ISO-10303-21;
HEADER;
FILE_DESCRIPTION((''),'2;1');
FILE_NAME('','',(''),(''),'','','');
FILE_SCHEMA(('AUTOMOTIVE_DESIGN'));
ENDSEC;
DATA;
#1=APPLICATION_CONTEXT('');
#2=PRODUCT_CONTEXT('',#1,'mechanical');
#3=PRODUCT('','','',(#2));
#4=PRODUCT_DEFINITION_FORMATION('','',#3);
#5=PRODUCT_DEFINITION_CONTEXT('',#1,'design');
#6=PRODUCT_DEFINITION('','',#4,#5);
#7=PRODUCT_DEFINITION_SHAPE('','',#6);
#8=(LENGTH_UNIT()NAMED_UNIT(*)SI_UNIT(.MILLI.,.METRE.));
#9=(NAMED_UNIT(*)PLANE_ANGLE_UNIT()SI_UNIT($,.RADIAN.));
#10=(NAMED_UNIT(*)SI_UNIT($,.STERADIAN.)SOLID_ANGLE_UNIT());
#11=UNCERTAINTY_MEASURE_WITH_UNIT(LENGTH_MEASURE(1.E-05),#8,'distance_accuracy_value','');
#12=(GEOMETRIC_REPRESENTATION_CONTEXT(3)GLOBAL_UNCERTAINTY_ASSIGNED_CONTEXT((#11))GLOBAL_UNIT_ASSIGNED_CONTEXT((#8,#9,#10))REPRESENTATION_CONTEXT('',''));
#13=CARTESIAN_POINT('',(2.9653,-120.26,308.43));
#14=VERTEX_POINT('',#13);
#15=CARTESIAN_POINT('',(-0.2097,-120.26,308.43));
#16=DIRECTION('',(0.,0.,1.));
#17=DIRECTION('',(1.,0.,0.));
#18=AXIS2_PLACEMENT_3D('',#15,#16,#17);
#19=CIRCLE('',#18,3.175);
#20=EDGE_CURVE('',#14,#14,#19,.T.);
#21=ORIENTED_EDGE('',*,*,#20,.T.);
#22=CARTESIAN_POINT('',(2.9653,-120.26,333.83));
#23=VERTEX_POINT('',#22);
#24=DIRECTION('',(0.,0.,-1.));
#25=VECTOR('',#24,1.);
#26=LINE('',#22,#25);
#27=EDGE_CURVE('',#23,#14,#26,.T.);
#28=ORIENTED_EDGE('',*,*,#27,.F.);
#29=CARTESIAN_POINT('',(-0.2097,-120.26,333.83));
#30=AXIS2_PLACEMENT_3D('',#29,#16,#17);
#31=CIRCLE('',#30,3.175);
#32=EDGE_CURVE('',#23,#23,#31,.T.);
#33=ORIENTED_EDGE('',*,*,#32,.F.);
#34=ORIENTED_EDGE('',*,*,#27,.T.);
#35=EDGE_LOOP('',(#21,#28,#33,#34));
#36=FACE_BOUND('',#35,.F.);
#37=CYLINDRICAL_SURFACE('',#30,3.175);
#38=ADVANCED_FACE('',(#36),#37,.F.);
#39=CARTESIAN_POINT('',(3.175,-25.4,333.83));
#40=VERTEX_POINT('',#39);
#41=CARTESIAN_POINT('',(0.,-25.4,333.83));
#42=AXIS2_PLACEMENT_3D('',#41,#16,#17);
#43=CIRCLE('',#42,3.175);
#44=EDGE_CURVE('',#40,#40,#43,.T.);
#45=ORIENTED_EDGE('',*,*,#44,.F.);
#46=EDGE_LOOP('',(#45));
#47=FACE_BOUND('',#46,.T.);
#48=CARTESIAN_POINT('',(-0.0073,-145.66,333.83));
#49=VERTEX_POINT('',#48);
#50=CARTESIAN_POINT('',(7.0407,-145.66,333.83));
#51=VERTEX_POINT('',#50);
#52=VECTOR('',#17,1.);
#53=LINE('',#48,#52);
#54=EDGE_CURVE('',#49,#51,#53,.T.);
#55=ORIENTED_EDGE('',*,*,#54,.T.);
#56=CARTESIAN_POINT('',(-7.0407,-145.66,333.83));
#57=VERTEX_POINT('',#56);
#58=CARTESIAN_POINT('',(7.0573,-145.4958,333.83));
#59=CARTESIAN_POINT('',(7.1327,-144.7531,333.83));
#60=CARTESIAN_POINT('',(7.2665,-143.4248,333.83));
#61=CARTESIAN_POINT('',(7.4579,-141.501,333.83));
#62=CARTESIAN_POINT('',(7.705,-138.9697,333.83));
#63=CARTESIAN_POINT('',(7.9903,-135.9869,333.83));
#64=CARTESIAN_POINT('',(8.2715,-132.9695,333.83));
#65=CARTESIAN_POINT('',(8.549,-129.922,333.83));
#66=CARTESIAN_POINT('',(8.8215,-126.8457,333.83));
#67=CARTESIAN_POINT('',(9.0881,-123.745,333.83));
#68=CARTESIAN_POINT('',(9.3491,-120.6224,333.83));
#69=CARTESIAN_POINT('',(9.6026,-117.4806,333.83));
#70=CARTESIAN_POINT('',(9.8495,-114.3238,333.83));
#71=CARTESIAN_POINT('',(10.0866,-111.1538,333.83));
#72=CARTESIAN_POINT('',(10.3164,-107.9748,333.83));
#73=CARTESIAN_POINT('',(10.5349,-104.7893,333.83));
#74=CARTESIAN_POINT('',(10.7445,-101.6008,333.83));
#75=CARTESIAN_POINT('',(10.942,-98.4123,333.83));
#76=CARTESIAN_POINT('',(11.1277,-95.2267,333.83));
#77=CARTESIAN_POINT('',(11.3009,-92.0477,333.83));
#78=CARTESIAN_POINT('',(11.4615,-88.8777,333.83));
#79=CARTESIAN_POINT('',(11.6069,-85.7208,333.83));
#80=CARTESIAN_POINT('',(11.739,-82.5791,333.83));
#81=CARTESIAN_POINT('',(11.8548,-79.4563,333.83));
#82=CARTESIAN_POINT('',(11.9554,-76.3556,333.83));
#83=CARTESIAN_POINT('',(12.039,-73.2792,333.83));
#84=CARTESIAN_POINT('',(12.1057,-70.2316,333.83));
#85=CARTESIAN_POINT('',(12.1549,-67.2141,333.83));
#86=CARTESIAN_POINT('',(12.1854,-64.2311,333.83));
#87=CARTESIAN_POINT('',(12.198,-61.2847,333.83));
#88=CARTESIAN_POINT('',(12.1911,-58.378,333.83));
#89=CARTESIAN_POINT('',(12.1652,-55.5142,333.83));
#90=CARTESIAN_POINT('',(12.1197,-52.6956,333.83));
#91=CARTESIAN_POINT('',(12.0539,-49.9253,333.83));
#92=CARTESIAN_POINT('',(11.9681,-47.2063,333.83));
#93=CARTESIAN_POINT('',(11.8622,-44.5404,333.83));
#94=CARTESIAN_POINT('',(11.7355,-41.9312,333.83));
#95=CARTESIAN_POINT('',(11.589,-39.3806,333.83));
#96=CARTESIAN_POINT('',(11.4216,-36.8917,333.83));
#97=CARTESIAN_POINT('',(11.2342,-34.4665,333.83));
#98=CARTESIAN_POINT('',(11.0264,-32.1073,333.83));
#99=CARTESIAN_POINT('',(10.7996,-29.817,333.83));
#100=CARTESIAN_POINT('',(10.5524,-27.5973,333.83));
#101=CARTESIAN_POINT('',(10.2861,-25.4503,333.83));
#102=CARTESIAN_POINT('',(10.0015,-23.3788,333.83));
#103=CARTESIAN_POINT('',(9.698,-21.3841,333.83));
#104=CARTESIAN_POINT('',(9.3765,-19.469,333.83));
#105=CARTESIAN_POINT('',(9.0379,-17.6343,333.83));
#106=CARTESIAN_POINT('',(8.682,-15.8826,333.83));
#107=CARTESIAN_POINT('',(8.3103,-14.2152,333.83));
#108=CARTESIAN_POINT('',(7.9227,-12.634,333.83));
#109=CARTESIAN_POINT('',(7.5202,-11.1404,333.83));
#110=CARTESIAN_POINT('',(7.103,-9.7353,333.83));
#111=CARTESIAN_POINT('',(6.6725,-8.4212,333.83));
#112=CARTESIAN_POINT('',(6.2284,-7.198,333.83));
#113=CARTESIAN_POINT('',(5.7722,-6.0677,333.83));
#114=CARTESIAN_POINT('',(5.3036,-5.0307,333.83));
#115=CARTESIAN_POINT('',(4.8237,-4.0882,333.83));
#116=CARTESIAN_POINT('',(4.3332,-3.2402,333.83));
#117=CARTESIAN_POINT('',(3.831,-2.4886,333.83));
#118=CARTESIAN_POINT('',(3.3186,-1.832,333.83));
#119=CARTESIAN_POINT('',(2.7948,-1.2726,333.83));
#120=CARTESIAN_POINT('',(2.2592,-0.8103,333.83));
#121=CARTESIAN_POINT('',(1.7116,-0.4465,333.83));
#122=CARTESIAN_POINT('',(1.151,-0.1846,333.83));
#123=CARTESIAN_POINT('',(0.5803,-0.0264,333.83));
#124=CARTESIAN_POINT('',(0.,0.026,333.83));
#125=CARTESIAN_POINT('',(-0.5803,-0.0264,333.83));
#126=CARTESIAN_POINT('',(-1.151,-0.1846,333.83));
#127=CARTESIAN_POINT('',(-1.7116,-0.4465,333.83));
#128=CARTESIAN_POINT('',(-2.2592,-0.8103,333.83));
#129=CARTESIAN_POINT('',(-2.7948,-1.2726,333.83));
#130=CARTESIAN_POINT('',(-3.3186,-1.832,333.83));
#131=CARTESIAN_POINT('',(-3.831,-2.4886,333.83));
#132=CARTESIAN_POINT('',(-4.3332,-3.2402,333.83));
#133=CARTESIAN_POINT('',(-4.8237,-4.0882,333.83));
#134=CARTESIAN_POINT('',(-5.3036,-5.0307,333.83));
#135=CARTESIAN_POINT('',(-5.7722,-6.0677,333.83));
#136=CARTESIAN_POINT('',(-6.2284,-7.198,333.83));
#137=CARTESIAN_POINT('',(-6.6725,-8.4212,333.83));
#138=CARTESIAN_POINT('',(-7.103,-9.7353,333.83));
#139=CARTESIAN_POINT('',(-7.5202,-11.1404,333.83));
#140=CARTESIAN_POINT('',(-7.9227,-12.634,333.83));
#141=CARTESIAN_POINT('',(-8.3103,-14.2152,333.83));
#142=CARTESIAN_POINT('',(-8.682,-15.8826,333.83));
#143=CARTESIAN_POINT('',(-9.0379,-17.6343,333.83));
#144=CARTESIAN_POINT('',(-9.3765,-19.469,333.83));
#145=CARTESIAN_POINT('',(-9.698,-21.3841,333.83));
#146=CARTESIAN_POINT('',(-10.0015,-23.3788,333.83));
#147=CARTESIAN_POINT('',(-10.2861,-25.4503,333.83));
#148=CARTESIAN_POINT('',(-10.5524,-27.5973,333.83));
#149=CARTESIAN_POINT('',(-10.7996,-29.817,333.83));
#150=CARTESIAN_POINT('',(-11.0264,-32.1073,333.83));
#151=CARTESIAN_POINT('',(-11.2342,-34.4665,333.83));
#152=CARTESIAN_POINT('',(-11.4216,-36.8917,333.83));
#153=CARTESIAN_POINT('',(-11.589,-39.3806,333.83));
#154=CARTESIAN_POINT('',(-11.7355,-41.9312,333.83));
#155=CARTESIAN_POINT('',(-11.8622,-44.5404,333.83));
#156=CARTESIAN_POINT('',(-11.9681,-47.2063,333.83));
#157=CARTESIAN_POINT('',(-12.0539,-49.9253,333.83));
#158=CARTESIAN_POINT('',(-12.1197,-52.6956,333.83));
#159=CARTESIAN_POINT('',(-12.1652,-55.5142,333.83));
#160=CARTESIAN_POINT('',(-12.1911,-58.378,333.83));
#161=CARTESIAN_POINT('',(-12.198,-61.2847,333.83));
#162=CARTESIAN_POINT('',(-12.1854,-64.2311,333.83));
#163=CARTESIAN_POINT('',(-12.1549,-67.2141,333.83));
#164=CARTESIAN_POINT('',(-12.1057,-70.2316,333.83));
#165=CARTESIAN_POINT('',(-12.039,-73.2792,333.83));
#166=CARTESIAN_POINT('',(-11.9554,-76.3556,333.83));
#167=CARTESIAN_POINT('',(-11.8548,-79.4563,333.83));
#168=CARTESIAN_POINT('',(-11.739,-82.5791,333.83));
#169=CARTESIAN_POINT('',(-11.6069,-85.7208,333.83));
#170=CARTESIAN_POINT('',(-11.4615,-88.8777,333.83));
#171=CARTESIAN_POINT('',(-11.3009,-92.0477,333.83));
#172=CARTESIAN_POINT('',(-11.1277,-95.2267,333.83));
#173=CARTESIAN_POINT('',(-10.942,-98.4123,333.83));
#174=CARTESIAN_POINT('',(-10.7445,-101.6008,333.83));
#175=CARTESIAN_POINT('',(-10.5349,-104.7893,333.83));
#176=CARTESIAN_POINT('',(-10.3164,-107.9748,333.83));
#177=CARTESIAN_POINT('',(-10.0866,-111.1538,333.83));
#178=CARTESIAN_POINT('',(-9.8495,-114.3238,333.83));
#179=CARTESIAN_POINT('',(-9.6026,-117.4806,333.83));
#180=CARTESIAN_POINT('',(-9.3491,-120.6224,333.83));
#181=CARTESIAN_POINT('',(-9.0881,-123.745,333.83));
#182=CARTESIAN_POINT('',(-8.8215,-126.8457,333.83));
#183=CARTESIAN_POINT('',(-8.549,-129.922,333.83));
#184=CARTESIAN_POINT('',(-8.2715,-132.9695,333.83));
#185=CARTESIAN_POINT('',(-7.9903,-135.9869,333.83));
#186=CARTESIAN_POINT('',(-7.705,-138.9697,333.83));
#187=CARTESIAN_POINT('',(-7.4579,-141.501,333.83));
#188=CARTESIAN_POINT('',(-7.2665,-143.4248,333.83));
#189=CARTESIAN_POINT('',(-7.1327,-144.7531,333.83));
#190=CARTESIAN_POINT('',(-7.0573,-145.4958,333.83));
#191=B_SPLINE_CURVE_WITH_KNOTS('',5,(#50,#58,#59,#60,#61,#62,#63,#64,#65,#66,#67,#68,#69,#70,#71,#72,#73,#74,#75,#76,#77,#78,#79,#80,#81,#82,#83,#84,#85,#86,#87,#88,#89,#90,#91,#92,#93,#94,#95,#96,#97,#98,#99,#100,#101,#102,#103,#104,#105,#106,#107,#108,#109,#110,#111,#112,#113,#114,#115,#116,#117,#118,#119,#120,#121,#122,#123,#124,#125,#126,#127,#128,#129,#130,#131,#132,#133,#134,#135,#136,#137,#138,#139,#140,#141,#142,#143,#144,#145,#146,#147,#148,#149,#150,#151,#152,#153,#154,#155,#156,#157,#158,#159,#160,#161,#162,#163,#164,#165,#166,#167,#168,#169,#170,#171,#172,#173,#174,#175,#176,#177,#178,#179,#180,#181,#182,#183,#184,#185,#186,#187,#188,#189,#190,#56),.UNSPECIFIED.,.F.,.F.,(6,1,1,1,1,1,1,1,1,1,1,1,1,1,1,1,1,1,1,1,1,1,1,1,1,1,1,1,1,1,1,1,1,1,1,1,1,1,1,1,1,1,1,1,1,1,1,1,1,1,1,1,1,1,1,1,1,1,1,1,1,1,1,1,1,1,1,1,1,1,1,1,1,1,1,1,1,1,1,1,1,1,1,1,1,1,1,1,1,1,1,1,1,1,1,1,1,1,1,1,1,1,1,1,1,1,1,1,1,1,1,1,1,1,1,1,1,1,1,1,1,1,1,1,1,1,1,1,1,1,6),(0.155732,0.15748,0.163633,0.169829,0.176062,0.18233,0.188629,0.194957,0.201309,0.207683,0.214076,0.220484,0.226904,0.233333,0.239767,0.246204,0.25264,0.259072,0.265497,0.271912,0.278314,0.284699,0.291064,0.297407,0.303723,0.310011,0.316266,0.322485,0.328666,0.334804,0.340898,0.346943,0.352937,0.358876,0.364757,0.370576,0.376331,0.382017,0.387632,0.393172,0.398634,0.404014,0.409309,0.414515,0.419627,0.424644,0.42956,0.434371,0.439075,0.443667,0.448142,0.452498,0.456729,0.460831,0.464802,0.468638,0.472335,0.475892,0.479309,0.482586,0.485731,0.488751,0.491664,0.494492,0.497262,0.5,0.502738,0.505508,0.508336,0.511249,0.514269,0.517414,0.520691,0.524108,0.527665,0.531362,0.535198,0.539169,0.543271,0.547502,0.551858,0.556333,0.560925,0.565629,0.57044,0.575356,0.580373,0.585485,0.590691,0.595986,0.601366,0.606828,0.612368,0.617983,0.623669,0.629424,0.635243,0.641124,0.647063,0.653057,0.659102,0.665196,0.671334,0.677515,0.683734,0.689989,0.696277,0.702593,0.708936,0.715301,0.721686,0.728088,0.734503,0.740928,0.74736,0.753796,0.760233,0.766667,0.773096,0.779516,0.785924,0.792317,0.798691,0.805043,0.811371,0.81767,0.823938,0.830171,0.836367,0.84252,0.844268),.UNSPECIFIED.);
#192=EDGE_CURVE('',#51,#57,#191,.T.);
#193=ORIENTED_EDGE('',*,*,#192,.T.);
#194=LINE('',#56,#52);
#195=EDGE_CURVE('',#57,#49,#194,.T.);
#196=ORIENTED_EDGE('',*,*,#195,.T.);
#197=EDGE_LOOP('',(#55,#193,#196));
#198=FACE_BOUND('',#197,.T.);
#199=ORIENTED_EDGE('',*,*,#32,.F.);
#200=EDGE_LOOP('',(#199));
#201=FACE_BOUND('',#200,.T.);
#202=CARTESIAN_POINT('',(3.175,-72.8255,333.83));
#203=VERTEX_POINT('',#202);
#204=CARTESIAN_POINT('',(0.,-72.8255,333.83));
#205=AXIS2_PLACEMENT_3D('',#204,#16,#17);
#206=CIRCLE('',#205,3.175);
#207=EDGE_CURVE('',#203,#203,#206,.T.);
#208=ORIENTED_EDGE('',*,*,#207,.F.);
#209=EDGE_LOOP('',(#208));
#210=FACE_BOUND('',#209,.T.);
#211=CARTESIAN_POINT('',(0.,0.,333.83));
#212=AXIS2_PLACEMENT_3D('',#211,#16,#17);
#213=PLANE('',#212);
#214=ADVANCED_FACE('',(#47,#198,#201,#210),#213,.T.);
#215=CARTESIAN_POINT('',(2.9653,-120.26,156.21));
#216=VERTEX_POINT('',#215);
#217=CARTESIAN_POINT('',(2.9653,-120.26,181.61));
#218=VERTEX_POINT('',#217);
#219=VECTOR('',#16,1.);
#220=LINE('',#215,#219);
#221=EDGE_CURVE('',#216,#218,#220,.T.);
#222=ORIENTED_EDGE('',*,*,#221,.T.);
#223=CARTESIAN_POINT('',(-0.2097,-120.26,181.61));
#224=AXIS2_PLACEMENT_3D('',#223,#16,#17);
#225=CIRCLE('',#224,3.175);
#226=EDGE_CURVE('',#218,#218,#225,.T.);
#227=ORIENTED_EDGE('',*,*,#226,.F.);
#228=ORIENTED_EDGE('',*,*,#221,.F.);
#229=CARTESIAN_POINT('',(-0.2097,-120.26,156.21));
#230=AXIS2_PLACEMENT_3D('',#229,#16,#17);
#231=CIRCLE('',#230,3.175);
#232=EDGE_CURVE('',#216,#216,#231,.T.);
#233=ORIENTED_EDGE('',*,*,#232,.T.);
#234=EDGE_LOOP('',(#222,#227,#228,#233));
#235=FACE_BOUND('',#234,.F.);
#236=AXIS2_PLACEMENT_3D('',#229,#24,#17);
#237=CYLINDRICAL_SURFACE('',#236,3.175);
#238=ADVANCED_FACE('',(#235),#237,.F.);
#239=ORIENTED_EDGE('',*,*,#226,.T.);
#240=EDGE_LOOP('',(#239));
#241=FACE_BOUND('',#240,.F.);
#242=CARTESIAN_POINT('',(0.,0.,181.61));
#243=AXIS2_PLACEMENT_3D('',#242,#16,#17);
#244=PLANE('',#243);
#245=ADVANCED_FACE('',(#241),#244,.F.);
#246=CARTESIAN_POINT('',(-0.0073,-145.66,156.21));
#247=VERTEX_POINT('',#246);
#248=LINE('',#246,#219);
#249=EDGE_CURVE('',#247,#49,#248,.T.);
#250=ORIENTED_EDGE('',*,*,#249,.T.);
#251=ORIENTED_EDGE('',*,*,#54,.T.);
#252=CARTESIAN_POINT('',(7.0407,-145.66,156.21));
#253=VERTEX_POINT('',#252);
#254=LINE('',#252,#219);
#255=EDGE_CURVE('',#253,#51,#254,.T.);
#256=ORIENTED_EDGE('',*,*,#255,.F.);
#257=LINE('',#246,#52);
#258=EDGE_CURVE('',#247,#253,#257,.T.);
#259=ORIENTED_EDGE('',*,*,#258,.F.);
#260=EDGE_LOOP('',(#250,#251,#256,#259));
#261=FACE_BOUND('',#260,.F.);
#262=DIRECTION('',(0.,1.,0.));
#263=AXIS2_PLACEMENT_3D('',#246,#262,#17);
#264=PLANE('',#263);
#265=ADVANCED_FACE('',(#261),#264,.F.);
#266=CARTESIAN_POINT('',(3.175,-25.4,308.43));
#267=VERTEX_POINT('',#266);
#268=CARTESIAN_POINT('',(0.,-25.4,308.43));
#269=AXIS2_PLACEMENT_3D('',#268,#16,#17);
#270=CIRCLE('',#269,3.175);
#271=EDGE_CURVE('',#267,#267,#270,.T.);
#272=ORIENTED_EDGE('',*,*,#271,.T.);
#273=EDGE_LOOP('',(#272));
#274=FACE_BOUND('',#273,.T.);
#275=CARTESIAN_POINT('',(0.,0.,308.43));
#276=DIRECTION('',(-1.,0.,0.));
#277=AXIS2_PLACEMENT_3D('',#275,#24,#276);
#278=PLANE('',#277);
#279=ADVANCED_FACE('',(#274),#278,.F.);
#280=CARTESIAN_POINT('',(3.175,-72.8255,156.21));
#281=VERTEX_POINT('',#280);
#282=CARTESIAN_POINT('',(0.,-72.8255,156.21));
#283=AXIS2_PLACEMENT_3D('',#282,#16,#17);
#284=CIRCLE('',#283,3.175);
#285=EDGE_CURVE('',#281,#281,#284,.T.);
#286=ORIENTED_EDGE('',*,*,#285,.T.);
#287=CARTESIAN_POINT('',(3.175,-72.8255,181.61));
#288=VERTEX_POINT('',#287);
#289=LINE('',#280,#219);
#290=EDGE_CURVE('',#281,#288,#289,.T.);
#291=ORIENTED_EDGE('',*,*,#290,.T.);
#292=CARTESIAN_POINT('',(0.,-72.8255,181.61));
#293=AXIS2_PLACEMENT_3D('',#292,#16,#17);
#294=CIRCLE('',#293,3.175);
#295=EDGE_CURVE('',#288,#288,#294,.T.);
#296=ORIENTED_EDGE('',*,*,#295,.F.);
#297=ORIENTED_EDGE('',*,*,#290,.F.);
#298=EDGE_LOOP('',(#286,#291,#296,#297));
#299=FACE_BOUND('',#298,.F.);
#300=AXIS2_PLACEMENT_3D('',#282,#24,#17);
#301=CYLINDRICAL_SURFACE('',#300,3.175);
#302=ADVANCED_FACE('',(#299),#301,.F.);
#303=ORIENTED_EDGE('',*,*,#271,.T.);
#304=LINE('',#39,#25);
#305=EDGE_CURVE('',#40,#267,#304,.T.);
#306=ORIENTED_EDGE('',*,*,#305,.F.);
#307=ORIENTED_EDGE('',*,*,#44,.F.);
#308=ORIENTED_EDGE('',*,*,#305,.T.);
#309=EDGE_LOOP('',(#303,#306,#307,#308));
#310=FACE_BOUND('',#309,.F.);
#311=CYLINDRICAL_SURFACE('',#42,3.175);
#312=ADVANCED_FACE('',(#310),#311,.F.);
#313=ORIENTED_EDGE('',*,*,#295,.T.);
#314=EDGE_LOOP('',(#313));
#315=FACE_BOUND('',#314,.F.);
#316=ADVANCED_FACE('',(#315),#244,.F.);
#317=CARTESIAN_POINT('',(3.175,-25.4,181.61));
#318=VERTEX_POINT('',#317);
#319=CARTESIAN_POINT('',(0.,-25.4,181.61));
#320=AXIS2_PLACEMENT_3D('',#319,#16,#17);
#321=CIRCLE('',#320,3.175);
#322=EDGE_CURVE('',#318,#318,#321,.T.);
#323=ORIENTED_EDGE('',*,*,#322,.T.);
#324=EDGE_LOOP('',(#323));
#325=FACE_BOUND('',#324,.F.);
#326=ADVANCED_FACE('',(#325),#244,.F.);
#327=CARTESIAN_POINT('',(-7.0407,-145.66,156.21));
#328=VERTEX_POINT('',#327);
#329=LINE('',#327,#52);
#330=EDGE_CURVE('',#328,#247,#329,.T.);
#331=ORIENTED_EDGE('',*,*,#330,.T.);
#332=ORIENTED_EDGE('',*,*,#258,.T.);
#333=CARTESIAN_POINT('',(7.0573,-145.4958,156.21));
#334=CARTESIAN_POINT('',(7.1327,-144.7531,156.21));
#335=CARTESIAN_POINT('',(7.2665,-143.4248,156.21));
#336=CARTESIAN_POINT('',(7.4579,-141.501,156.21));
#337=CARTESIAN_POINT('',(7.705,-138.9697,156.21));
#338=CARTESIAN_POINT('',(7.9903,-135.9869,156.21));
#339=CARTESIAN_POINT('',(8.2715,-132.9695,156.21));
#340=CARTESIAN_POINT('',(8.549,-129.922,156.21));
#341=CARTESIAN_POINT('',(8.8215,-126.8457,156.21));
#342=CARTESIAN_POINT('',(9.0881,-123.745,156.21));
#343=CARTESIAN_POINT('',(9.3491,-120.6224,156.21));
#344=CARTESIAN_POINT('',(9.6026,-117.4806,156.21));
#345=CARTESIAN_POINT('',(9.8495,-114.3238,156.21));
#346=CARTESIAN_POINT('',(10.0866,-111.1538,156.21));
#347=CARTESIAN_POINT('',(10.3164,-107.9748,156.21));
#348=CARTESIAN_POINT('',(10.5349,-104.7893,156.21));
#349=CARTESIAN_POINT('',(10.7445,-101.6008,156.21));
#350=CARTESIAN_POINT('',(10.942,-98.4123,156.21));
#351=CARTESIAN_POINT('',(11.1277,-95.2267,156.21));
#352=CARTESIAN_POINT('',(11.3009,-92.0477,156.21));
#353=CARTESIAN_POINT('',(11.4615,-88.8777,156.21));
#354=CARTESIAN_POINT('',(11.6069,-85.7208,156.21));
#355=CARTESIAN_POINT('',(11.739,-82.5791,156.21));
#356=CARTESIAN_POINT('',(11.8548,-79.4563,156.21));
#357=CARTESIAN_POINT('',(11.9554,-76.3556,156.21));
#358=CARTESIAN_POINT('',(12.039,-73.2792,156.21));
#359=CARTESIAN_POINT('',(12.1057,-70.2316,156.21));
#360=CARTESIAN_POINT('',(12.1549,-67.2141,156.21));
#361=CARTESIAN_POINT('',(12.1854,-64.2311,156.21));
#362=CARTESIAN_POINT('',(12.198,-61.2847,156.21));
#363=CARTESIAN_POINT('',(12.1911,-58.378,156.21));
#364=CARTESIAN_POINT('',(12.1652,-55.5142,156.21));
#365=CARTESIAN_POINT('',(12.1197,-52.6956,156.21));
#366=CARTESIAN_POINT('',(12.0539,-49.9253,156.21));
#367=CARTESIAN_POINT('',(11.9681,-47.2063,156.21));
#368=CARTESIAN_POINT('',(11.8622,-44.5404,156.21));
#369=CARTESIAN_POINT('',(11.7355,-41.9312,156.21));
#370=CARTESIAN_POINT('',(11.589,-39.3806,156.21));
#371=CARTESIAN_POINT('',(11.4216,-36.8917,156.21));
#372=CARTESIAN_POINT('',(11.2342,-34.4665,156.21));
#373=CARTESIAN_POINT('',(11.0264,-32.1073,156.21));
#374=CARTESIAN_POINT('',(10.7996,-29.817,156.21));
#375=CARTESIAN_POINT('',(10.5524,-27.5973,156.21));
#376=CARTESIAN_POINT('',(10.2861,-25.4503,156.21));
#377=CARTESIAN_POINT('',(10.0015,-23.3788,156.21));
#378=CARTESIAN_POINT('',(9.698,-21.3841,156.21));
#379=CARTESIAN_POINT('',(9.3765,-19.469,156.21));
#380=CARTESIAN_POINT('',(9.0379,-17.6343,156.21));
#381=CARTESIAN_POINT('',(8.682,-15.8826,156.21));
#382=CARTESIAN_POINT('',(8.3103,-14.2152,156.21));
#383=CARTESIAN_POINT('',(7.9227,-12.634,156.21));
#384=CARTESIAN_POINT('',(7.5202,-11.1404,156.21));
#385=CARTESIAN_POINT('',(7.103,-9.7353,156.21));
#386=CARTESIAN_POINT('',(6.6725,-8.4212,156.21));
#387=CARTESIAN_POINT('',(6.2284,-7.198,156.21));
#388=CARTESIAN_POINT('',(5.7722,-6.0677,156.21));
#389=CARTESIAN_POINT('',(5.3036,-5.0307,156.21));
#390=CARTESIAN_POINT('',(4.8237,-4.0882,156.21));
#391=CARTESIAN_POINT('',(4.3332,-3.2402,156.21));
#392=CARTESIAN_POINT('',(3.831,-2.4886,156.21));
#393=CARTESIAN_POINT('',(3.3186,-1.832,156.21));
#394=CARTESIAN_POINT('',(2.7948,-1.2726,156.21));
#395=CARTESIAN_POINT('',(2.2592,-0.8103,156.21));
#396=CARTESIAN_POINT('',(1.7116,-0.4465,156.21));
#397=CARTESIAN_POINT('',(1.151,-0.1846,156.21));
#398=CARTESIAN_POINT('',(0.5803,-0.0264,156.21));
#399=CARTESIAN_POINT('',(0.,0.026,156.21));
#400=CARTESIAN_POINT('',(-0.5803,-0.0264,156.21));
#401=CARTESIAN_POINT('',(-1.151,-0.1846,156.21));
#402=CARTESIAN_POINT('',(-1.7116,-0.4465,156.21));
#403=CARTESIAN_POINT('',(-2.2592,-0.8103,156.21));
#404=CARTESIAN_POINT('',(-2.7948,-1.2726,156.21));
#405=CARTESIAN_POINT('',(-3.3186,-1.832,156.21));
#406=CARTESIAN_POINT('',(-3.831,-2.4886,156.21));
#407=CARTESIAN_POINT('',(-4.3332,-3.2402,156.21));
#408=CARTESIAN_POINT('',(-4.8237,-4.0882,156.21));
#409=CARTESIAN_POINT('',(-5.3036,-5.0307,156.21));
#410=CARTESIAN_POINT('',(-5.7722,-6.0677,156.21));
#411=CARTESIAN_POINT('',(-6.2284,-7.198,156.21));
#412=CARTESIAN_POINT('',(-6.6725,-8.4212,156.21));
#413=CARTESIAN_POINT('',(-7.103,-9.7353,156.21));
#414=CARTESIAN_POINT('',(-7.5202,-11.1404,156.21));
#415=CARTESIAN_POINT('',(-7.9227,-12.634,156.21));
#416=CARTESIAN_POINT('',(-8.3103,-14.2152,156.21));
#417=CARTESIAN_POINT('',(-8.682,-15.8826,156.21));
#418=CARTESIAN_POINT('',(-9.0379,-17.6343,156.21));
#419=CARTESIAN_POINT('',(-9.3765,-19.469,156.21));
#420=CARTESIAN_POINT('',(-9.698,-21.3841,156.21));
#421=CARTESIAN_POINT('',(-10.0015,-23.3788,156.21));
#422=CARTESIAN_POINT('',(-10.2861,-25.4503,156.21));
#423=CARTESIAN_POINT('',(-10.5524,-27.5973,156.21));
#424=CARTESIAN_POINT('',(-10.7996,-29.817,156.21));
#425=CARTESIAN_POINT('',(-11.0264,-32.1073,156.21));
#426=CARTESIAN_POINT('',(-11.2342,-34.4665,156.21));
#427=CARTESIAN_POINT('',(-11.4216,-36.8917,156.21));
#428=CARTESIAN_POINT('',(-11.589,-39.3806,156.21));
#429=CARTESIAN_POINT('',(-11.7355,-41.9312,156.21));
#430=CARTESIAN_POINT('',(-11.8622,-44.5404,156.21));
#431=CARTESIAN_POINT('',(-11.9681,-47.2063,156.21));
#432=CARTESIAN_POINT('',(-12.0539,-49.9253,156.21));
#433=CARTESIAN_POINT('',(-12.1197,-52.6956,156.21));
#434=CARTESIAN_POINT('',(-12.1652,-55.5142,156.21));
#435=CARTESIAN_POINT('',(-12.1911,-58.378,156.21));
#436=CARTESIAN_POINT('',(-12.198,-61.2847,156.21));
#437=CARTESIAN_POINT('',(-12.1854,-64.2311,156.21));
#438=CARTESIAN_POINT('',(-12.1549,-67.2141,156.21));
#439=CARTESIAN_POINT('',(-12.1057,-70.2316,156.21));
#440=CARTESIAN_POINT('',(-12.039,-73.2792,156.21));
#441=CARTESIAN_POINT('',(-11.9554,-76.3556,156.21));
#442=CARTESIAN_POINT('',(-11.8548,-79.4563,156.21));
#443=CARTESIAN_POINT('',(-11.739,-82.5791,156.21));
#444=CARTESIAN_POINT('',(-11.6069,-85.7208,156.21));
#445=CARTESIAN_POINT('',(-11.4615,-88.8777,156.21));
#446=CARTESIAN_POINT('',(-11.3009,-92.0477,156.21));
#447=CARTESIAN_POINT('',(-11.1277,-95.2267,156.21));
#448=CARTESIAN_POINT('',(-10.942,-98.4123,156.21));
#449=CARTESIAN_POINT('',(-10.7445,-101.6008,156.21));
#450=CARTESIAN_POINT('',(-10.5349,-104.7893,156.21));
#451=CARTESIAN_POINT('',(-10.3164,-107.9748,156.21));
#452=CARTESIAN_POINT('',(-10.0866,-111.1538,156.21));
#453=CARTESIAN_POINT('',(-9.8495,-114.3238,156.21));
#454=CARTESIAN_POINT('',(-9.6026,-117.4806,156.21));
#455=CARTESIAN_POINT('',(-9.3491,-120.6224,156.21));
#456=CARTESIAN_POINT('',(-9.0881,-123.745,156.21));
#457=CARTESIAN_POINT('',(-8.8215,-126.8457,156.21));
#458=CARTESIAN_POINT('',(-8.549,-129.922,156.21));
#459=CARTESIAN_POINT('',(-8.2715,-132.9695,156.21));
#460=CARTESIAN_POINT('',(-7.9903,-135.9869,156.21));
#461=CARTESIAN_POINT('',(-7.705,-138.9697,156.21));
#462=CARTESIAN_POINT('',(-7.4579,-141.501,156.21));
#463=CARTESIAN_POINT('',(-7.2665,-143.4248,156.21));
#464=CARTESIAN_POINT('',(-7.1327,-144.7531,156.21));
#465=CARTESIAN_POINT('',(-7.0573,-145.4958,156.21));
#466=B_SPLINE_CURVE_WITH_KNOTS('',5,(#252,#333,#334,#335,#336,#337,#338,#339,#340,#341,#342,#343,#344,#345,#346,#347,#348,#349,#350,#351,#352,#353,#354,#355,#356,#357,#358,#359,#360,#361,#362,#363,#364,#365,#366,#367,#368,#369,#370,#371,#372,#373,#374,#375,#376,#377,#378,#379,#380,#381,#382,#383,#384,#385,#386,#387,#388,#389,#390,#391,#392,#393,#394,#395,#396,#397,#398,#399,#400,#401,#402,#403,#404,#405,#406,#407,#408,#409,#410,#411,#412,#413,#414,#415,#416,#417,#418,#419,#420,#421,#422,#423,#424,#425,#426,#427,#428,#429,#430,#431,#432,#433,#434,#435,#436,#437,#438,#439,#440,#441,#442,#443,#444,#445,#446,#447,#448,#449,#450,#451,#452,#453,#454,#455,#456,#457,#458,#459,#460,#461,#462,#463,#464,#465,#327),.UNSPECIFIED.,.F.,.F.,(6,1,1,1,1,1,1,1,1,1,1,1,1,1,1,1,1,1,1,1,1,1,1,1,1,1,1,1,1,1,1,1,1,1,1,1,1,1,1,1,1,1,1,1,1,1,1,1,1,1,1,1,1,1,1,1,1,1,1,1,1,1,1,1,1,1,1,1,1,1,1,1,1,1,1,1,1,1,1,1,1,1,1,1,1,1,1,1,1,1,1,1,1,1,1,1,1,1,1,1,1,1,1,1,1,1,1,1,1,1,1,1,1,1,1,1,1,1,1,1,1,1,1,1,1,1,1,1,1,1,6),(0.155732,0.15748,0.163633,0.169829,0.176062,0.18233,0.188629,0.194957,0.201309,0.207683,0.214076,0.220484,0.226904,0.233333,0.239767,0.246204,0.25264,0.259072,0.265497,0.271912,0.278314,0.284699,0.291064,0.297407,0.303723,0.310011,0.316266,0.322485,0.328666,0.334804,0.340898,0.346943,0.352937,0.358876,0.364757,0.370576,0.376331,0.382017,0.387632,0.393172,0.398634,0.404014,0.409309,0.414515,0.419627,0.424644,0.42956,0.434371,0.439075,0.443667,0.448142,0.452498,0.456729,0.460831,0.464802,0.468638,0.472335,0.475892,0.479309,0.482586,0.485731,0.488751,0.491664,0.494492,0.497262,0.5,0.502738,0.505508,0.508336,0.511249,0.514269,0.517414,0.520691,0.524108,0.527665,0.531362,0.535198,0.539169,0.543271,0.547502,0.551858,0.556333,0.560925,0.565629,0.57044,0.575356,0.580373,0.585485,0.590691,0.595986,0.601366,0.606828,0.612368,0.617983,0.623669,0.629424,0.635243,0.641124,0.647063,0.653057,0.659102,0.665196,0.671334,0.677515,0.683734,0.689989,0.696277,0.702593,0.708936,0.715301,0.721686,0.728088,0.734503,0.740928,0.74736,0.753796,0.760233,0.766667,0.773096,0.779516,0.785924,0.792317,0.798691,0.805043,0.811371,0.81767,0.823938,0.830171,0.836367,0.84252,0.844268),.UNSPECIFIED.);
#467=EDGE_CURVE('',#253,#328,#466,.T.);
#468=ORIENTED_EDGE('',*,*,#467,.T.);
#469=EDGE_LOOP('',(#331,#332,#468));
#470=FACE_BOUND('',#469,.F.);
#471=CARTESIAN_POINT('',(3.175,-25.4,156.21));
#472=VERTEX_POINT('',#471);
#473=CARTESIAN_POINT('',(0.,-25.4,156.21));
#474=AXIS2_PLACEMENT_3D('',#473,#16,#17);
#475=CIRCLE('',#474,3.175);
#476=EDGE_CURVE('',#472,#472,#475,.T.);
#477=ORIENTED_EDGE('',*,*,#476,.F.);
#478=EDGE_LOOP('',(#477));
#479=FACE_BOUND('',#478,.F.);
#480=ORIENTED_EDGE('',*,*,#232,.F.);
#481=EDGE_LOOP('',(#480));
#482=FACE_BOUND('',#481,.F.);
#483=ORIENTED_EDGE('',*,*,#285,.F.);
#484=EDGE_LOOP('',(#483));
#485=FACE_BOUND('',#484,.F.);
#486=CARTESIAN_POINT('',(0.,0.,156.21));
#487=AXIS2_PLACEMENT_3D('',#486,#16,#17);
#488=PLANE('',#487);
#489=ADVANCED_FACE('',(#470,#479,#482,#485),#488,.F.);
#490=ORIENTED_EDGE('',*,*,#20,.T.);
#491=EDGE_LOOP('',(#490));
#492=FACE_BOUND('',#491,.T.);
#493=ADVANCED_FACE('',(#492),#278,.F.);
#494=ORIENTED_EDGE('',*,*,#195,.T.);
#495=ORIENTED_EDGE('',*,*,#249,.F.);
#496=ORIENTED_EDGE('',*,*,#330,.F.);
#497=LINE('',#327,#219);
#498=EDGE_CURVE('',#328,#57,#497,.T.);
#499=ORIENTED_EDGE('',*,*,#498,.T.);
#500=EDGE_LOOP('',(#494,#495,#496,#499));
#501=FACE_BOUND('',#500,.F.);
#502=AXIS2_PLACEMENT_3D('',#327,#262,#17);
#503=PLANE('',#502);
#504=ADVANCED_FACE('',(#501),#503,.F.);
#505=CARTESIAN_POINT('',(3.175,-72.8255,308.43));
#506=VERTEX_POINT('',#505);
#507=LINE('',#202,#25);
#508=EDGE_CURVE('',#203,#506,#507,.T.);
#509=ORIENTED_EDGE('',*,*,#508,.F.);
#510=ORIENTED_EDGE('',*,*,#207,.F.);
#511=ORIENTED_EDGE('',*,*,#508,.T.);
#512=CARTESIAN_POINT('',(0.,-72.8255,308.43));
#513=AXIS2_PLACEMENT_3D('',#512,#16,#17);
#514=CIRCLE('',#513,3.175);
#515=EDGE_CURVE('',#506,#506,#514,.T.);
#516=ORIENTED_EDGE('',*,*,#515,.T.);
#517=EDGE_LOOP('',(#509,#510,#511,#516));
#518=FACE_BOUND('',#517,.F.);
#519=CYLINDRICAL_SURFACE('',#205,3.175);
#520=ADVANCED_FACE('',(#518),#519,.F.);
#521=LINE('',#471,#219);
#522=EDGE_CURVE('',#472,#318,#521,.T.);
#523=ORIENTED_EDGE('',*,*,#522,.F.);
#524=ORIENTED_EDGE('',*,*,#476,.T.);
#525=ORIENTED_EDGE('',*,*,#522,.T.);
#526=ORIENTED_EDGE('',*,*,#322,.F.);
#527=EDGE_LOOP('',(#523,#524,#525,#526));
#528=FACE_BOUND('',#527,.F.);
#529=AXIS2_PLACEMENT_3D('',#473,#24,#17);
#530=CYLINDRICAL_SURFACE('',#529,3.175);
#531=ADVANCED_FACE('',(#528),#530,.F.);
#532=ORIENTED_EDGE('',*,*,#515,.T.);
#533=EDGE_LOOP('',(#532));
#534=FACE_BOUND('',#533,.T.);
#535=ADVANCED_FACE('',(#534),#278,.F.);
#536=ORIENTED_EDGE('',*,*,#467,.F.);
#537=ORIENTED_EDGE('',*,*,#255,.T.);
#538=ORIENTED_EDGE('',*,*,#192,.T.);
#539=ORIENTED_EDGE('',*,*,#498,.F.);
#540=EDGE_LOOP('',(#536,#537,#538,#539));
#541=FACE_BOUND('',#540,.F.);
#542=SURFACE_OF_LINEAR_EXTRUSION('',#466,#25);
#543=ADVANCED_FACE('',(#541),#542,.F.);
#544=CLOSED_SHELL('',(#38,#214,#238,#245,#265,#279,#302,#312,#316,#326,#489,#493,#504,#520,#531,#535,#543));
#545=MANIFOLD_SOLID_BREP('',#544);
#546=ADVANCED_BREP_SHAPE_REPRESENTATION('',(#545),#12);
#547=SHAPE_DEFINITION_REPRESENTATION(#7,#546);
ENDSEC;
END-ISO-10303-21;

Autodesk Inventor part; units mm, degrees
ref_plane "YZ Plane" through (0, 0, 0) normal (1, 0, 0) x (0, 1, 0)
ref_plane "XZ Plane" through (0, 0, 0) normal (0, 1, 0) x (-1, 0, 0)
ref_plane "XY Plane" through (0, 0, 0) normal (0, 0, 1) x (1, 0, 0)
ref_plane "Work Plane1" through (0, 0, 156.21) normal (0, 0, 1) x (1, 0, 0)
sketch "Sketch1" plane through (0, 0, 156.21) normal (0, 0, 1) x (1, 0, 0)
  line L0 (-0.0073, -145.66) -> (7.0407, -145.66)
  spline S0 degree 5 poles (7.0407, -145.66) (7.0573, -145.4958) (7.1327, -144.7531) (7.2665, -143.4248) (7.4579, -141.501) (7.705, -138.9697) (7.9903, -135.9869) (8.2715, -132.9695) (8.549, -129.922) (8.8215, -126.8457) (9.0881, -123.745) (9.3491, -120.6224) (9.6026, -117.4806) (9.8495, -114.3238) (10.0866, -111.1538) (10.3164, -107.9748) (10.5349, -104.7893) (10.7445, -101.6008) (10.942, -98.4123) (11.1277, -95.2267) (11.3009, -92.0477) (11.4615, -88.8777) (11.6069, -85.7208) (11.739, -82.5791) (11.8548, -79.4563) (11.9554, -76.3556) (12.039, -73.2792) (12.1057, -70.2316) (12.1549, -67.2141) (12.1854, -64.2311) (12.198, -61.2847) (12.1911, -58.378) (12.1652, -55.5142) (12.1197, -52.6956) (12.0539, -49.9253) (11.9681, -47.2063) (11.8622, -44.5404) (11.7355, -41.9312) (11.589, -39.3806) (11.4216, -36.8917) (11.2342, -34.4665) (11.0264, -32.1073) (10.7996, -29.817) (10.5524, -27.5973) (10.2861, -25.4503) (10.0015, -23.3788) (9.698, -21.3841) (9.3765, -19.469) (9.0379, -17.6343) (8.682, -15.8826) (8.3103, -14.2152) (7.9227, -12.634) (7.5202, -11.1404) (7.103, -9.7353) (6.6725, -8.4212) (6.2284, -7.198) (5.7722, -6.0677) (5.3036, -5.0307) (4.8237, -4.0882) (4.3332, -3.2402) (3.831, -2.4886) (3.3186, -1.832) (2.7948, -1.2726) (2.2592, -0.8103) (1.7116, -0.4465) (1.151, -0.1846) (0.5803, -0.0264) (0, 0.026) (-0.5803, -0.0264) (-1.151, -0.1846) (-1.7116, -0.4465) (-2.2592, -0.8103) (-2.7948, -1.2726) (-3.3186, -1.832) (-3.831, -2.4886) (-4.3332, -3.2402) (-4.8237, -4.0882) (-5.3036, -5.0307) (-5.7722, -6.0677) (-6.2284, -7.198) (-6.6725, -8.4212) (-7.103, -9.7353) (-7.5202, -11.1404) (-7.9227, -12.634) (-8.3103, -14.2152) (-8.682, -15.8826) (-9.0379, -17.6343) (-9.3765, -19.469) (-9.698, -21.3841) (-10.0015, -23.3788) (-10.2861, -25.4503) (-10.5524, -27.5973) (-10.7996, -29.817) (-11.0264, -32.1073) (-11.2342, -34.4665) (-11.4216, -36.8917) (-11.589, -39.3806) (-11.7355, -41.9312) (-11.8622, -44.5404) (-11.9681, -47.2063) (-12.0539, -49.9253) (-12.1197, -52.6956) (-12.1652, -55.5142) (-12.1911, -58.378) (-12.198, -61.2847) (-12.1854, -64.2311) (-12.1549, -67.2141) (-12.1057, -70.2316) (-12.039, -73.2792) (-11.9554, -76.3556) (-11.8548, -79.4563) (-11.739, -82.5791) (-11.6069, -85.7208) (-11.4615, -88.8777) (-11.3009, -92.0477) (-11.1277, -95.2267) (-10.942, -98.4123) (-10.7445, -101.6008) (-10.5349, -104.7893) (-10.3164, -107.9748) (-10.0866, -111.1538) (-9.8495, -114.3238) (-9.6026, -117.4806) (-9.3491, -120.6224) (-9.0881, -123.745) (-8.8215, -126.8457) (-8.549, -129.922) (-8.2715, -132.9695) (-7.9903, -135.9869) (-7.705, -138.9697) (-7.4579, -141.501) (-7.2665, -143.4248) (-7.1327, -144.7531) (-7.0573, -145.4958) (-7.0407, -145.66) knots 0.155732 0.155732 0.155732 0.155732 0.155732 0.155732 0.15748 0.163633 0.169829 0.176062 0.18233 0.188629 0.194957 0.201309 0.207683 0.214076 0.220484 0.226904 0.233333 0.239767 0.246204 0.25264 0.259072 0.265497 0.271912 0.278314 0.284699 0.291064 0.297407 0.303723 0.310011 0.316266 0.322485 0.328666 0.334804 0.340898 0.346943 0.352937 0.358876 0.364757 0.370576 0.376331 0.382017 0.387632 0.393172 0.398634 0.404014 0.409309 0.414515 0.419627 0.424644 0.42956 0.434371 0.439075 0.443667 0.448142 0.452498 0.456729 0.460831 0.464802 0.468638 0.472335 0.475892 0.479309 0.482586 0.485731 0.488751 0.491664 0.494492 0.497262 0.5 0.502738 0.505508 0.508336 0.511249 0.514269 0.517414 0.520691 0.524108 0.527665 0.531362 0.535198 0.539169 0.543271 0.547502 0.551858 0.556333 0.560925 0.565629 0.57044 0.575356 0.580373 0.585485 0.590691 0.595986 0.601366 0.606828 0.612368 0.617983 0.623669 0.629424 0.635243 0.641124 0.647063 0.653057 0.659102 0.665196 0.671334 0.677515 0.683734 0.689989 0.696277 0.702593 0.708936 0.715301 0.721686 0.728088 0.734503 0.740928 0.74736 0.753796 0.760233 0.766667 0.773096 0.779516 0.785924 0.792317 0.798691 0.805043 0.811371 0.81767 0.823938 0.830171 0.836367 0.84252 0.844268 0.844268 0.844268 0.844268 0.844268 0.844268
  line L1 (-7.0407, -145.66) -> (-0.0073, -145.66)
  point P0 (0, 0)
  point P1 (7.4123, -141.9502)
  point P2 (7.7005, -139.0014)
  point P3 (7.9858, -136.0158)
  point P4 (8.2674, -132.996)
  point P5 (8.545, -129.9456)
  point P6 (8.8177, -126.8669)
  point P7 (9.0847, -123.7634)
  point P8 (9.3456, -120.638)
  point P9 (9.5996, -117.4937)
  point P10 (9.8461, -114.3339)
  point P11 (10.084, -111.1614)
  point P12 (10.3132, -107.9795)
  point P13 (10.5325, -104.7913)
  point P14 (10.7416, -101.6)
  point P15 (10.9393, -98.4087)
  point P16 (11.125, -95.2205)
  point P17 (11.2983, -92.0386)
  point P18 (11.4584, -88.8661)
  point P19 (11.6043, -85.7063)
  point P20 (11.7358, -82.562)
  point P21 (11.8518, -79.4366)
  point P22 (11.952, -76.3331)
  point P23 (12.0355, -73.2544)
  point P24 (12.102, -70.204)
  point P25 (12.1508, -67.1842)
  point P26 (12.1812, -64.1986)
  point P27 (12.1932, -61.2498)
  point P28 (12.1861, -58.3408)
  point P29 (12.1597, -55.4746)
  point P30 (12.1136, -52.6538)
  point P31 (12.0473, -49.8813)
  point P32 (11.961, -47.1601)
  point P33 (11.8543, -44.4923)
  point P34 (11.7271, -41.8809)
  point P35 (11.5796, -39.3285)
  point P36 (11.4115, -36.8377)
  point P37 (11.2231, -34.4107)
  point P38 (11.0147, -32.0499)
  point P39 (10.7865, -29.758)
  point P40 (10.5384, -27.5369)
  point P41 (10.2709, -25.3886)
  point P42 (9.9848, -23.3158)
  point P43 (9.68, -21.3202)
  point P44 (9.3572, -19.404)
  point P45 (9.0168, -17.5687)
  point P46 (8.6594, -15.8163)
  point P47 (8.2857, -14.1486)
  point P48 (7.8961, -12.5673)
  point P49 (7.4914, -11.0738)
  point P50 (7.072, -9.6695)
  point P51 (6.6387, -8.3562)
  point P52 (6.1921, -7.1348)
  point P53 (5.7329, -6.0066)
  point P54 (5.2615, -4.9727)
  point P55 (4.7787, -4.0341)
  point P56 (4.2851, -3.1919)
  point P57 (3.7809, -2.4469)
  point P58 (3.267, -1.7995)
  point P59 (2.7438, -1.2509)
  point P60 (2.2116, -0.8012)
  point P61 (1.6709, -0.4509)
  point P62 (1.1219, -0.2006)
  point P63 (0.5647, -0.0502)
  point P64 (0, 0)
  point P65 (-0.5647, -0.0502)
  point P66 (-1.1219, -0.2006)
  point P67 (-1.6709, -0.4509)
  point P68 (-2.2116, -0.8012)
  point P69 (-2.7438, -1.2509)
  point P70 (-3.267, -1.7995)
  point P71 (-3.7809, -2.4469)
  point P72 (-4.2851, -3.1919)
  point P73 (-4.7787, -4.0341)
  point P74 (-5.2615, -4.9727)
  point P75 (-5.7329, -6.0066)
  point P76 (-6.1921, -7.1348)
  point P77 (-6.6387, -8.3562)
  point P78 (-7.072, -9.6695)
  point P79 (-7.4914, -11.0738)
  point P80 (-7.8961, -12.5673)
  point P81 (-8.2857, -14.1486)
  point P82 (-8.6594, -15.8163)
  point P83 (-9.0168, -17.5687)
  point P84 (-9.3572, -19.404)
  point P85 (-9.68, -21.3202)
  point P86 (-9.9848, -23.3158)
  point P87 (-10.2709, -25.3886)
  point P88 (-10.5384, -27.5369)
  point P89 (-10.7865, -29.758)
  point P90 (-11.0147, -32.0499)
  point P91 (-11.2231, -34.4107)
  point P92 (-11.4115, -36.8377)
  point P93 (-11.5796, -39.3285)
  point P94 (-11.7271, -41.8809)
  point P95 (-11.8543, -44.4923)
  point P96 (-11.961, -47.1601)
  point P97 (-12.0473, -49.8813)
  point P98 (-12.1136, -52.6538)
  point P99 (-12.1597, -55.4746)
  point P100 (-12.1861, -58.3408)
  point P101 (-12.1932, -61.2498)
  point P102 (-12.1812, -64.1986)
  point P103 (-12.1508, -67.1842)
  point P104 (-12.102, -70.204)
  point P105 (-12.0355, -73.2544)
  point P106 (-11.952, -76.3331)
  point P107 (-11.8518, -79.4366)
  point P108 (-11.7358, -82.562)
  point P109 (-11.6043, -85.7063)
  point P110 (-11.4584, -88.8661)
  point P111 (-11.2983, -92.0386)
  point P112 (-11.125, -95.2205)
  point P113 (-10.9393, -98.4087)
  point P114 (-10.7416, -101.6)
  point P115 (-10.5325, -104.7913)
  point P116 (-10.3132, -107.9795)
  point P117 (-10.084, -111.1614)
  point P118 (-9.8461, -114.3339)
  point P119 (-9.5996, -117.4937)
  point P120 (-9.3456, -120.638)
  point P121 (-9.0847, -123.7634)
  point P122 (-8.8177, -126.8669)
  point P123 (-8.545, -129.9456)
  point P124 (-8.2674, -132.996)
  point P125 (-7.9858, -136.0158)
  point P126 (-7.7005, -139.0014)
  point P127 (-7.4123, -141.9502)
  point P128 (-7.1218, -144.8592)
  dimension "d4" = 145.66
extrude "Extrusion1" add sketch "Sketch1" along normal blind 177.62
sketch "Sketch2" plane through (0, 0, 156.21) normal (0, 0, 1) x (1, 0, 0)
  circle A0 centre (0, -25.4) radius 3.175
  circle A1 centre (-0.2097, -120.26) radius 3.175
  circle A2 centre (0, -72.8255) radius 3.175
  line L0 (-7.0407, -145.66) -> (7.0407, -145.66)
  point P0 (0, 0)
  dimension "d8" = 6.35
  dimension "d10" = 6.35
  dimension "d12" = 6.35
  dimension "d22" = 25.4
  dimension "d25" = 47.4345
  dimension "d28" = 25.4
  dimension "d29" = 47.4255
extrude "Extrusion2" cut sketch "Sketch2" along normal blind 25.4
ref_plane "Work Plane2" through (7.0407, -145.66, 245.02) normal (0, 0, 1) x (1, 0, 0)
mirror "Mirror1" about plane through (7.0407, -145.66, 245.02) normal (0, 0, 1) of "Extrusion2"
properties part number "MiddleTailLeft"
